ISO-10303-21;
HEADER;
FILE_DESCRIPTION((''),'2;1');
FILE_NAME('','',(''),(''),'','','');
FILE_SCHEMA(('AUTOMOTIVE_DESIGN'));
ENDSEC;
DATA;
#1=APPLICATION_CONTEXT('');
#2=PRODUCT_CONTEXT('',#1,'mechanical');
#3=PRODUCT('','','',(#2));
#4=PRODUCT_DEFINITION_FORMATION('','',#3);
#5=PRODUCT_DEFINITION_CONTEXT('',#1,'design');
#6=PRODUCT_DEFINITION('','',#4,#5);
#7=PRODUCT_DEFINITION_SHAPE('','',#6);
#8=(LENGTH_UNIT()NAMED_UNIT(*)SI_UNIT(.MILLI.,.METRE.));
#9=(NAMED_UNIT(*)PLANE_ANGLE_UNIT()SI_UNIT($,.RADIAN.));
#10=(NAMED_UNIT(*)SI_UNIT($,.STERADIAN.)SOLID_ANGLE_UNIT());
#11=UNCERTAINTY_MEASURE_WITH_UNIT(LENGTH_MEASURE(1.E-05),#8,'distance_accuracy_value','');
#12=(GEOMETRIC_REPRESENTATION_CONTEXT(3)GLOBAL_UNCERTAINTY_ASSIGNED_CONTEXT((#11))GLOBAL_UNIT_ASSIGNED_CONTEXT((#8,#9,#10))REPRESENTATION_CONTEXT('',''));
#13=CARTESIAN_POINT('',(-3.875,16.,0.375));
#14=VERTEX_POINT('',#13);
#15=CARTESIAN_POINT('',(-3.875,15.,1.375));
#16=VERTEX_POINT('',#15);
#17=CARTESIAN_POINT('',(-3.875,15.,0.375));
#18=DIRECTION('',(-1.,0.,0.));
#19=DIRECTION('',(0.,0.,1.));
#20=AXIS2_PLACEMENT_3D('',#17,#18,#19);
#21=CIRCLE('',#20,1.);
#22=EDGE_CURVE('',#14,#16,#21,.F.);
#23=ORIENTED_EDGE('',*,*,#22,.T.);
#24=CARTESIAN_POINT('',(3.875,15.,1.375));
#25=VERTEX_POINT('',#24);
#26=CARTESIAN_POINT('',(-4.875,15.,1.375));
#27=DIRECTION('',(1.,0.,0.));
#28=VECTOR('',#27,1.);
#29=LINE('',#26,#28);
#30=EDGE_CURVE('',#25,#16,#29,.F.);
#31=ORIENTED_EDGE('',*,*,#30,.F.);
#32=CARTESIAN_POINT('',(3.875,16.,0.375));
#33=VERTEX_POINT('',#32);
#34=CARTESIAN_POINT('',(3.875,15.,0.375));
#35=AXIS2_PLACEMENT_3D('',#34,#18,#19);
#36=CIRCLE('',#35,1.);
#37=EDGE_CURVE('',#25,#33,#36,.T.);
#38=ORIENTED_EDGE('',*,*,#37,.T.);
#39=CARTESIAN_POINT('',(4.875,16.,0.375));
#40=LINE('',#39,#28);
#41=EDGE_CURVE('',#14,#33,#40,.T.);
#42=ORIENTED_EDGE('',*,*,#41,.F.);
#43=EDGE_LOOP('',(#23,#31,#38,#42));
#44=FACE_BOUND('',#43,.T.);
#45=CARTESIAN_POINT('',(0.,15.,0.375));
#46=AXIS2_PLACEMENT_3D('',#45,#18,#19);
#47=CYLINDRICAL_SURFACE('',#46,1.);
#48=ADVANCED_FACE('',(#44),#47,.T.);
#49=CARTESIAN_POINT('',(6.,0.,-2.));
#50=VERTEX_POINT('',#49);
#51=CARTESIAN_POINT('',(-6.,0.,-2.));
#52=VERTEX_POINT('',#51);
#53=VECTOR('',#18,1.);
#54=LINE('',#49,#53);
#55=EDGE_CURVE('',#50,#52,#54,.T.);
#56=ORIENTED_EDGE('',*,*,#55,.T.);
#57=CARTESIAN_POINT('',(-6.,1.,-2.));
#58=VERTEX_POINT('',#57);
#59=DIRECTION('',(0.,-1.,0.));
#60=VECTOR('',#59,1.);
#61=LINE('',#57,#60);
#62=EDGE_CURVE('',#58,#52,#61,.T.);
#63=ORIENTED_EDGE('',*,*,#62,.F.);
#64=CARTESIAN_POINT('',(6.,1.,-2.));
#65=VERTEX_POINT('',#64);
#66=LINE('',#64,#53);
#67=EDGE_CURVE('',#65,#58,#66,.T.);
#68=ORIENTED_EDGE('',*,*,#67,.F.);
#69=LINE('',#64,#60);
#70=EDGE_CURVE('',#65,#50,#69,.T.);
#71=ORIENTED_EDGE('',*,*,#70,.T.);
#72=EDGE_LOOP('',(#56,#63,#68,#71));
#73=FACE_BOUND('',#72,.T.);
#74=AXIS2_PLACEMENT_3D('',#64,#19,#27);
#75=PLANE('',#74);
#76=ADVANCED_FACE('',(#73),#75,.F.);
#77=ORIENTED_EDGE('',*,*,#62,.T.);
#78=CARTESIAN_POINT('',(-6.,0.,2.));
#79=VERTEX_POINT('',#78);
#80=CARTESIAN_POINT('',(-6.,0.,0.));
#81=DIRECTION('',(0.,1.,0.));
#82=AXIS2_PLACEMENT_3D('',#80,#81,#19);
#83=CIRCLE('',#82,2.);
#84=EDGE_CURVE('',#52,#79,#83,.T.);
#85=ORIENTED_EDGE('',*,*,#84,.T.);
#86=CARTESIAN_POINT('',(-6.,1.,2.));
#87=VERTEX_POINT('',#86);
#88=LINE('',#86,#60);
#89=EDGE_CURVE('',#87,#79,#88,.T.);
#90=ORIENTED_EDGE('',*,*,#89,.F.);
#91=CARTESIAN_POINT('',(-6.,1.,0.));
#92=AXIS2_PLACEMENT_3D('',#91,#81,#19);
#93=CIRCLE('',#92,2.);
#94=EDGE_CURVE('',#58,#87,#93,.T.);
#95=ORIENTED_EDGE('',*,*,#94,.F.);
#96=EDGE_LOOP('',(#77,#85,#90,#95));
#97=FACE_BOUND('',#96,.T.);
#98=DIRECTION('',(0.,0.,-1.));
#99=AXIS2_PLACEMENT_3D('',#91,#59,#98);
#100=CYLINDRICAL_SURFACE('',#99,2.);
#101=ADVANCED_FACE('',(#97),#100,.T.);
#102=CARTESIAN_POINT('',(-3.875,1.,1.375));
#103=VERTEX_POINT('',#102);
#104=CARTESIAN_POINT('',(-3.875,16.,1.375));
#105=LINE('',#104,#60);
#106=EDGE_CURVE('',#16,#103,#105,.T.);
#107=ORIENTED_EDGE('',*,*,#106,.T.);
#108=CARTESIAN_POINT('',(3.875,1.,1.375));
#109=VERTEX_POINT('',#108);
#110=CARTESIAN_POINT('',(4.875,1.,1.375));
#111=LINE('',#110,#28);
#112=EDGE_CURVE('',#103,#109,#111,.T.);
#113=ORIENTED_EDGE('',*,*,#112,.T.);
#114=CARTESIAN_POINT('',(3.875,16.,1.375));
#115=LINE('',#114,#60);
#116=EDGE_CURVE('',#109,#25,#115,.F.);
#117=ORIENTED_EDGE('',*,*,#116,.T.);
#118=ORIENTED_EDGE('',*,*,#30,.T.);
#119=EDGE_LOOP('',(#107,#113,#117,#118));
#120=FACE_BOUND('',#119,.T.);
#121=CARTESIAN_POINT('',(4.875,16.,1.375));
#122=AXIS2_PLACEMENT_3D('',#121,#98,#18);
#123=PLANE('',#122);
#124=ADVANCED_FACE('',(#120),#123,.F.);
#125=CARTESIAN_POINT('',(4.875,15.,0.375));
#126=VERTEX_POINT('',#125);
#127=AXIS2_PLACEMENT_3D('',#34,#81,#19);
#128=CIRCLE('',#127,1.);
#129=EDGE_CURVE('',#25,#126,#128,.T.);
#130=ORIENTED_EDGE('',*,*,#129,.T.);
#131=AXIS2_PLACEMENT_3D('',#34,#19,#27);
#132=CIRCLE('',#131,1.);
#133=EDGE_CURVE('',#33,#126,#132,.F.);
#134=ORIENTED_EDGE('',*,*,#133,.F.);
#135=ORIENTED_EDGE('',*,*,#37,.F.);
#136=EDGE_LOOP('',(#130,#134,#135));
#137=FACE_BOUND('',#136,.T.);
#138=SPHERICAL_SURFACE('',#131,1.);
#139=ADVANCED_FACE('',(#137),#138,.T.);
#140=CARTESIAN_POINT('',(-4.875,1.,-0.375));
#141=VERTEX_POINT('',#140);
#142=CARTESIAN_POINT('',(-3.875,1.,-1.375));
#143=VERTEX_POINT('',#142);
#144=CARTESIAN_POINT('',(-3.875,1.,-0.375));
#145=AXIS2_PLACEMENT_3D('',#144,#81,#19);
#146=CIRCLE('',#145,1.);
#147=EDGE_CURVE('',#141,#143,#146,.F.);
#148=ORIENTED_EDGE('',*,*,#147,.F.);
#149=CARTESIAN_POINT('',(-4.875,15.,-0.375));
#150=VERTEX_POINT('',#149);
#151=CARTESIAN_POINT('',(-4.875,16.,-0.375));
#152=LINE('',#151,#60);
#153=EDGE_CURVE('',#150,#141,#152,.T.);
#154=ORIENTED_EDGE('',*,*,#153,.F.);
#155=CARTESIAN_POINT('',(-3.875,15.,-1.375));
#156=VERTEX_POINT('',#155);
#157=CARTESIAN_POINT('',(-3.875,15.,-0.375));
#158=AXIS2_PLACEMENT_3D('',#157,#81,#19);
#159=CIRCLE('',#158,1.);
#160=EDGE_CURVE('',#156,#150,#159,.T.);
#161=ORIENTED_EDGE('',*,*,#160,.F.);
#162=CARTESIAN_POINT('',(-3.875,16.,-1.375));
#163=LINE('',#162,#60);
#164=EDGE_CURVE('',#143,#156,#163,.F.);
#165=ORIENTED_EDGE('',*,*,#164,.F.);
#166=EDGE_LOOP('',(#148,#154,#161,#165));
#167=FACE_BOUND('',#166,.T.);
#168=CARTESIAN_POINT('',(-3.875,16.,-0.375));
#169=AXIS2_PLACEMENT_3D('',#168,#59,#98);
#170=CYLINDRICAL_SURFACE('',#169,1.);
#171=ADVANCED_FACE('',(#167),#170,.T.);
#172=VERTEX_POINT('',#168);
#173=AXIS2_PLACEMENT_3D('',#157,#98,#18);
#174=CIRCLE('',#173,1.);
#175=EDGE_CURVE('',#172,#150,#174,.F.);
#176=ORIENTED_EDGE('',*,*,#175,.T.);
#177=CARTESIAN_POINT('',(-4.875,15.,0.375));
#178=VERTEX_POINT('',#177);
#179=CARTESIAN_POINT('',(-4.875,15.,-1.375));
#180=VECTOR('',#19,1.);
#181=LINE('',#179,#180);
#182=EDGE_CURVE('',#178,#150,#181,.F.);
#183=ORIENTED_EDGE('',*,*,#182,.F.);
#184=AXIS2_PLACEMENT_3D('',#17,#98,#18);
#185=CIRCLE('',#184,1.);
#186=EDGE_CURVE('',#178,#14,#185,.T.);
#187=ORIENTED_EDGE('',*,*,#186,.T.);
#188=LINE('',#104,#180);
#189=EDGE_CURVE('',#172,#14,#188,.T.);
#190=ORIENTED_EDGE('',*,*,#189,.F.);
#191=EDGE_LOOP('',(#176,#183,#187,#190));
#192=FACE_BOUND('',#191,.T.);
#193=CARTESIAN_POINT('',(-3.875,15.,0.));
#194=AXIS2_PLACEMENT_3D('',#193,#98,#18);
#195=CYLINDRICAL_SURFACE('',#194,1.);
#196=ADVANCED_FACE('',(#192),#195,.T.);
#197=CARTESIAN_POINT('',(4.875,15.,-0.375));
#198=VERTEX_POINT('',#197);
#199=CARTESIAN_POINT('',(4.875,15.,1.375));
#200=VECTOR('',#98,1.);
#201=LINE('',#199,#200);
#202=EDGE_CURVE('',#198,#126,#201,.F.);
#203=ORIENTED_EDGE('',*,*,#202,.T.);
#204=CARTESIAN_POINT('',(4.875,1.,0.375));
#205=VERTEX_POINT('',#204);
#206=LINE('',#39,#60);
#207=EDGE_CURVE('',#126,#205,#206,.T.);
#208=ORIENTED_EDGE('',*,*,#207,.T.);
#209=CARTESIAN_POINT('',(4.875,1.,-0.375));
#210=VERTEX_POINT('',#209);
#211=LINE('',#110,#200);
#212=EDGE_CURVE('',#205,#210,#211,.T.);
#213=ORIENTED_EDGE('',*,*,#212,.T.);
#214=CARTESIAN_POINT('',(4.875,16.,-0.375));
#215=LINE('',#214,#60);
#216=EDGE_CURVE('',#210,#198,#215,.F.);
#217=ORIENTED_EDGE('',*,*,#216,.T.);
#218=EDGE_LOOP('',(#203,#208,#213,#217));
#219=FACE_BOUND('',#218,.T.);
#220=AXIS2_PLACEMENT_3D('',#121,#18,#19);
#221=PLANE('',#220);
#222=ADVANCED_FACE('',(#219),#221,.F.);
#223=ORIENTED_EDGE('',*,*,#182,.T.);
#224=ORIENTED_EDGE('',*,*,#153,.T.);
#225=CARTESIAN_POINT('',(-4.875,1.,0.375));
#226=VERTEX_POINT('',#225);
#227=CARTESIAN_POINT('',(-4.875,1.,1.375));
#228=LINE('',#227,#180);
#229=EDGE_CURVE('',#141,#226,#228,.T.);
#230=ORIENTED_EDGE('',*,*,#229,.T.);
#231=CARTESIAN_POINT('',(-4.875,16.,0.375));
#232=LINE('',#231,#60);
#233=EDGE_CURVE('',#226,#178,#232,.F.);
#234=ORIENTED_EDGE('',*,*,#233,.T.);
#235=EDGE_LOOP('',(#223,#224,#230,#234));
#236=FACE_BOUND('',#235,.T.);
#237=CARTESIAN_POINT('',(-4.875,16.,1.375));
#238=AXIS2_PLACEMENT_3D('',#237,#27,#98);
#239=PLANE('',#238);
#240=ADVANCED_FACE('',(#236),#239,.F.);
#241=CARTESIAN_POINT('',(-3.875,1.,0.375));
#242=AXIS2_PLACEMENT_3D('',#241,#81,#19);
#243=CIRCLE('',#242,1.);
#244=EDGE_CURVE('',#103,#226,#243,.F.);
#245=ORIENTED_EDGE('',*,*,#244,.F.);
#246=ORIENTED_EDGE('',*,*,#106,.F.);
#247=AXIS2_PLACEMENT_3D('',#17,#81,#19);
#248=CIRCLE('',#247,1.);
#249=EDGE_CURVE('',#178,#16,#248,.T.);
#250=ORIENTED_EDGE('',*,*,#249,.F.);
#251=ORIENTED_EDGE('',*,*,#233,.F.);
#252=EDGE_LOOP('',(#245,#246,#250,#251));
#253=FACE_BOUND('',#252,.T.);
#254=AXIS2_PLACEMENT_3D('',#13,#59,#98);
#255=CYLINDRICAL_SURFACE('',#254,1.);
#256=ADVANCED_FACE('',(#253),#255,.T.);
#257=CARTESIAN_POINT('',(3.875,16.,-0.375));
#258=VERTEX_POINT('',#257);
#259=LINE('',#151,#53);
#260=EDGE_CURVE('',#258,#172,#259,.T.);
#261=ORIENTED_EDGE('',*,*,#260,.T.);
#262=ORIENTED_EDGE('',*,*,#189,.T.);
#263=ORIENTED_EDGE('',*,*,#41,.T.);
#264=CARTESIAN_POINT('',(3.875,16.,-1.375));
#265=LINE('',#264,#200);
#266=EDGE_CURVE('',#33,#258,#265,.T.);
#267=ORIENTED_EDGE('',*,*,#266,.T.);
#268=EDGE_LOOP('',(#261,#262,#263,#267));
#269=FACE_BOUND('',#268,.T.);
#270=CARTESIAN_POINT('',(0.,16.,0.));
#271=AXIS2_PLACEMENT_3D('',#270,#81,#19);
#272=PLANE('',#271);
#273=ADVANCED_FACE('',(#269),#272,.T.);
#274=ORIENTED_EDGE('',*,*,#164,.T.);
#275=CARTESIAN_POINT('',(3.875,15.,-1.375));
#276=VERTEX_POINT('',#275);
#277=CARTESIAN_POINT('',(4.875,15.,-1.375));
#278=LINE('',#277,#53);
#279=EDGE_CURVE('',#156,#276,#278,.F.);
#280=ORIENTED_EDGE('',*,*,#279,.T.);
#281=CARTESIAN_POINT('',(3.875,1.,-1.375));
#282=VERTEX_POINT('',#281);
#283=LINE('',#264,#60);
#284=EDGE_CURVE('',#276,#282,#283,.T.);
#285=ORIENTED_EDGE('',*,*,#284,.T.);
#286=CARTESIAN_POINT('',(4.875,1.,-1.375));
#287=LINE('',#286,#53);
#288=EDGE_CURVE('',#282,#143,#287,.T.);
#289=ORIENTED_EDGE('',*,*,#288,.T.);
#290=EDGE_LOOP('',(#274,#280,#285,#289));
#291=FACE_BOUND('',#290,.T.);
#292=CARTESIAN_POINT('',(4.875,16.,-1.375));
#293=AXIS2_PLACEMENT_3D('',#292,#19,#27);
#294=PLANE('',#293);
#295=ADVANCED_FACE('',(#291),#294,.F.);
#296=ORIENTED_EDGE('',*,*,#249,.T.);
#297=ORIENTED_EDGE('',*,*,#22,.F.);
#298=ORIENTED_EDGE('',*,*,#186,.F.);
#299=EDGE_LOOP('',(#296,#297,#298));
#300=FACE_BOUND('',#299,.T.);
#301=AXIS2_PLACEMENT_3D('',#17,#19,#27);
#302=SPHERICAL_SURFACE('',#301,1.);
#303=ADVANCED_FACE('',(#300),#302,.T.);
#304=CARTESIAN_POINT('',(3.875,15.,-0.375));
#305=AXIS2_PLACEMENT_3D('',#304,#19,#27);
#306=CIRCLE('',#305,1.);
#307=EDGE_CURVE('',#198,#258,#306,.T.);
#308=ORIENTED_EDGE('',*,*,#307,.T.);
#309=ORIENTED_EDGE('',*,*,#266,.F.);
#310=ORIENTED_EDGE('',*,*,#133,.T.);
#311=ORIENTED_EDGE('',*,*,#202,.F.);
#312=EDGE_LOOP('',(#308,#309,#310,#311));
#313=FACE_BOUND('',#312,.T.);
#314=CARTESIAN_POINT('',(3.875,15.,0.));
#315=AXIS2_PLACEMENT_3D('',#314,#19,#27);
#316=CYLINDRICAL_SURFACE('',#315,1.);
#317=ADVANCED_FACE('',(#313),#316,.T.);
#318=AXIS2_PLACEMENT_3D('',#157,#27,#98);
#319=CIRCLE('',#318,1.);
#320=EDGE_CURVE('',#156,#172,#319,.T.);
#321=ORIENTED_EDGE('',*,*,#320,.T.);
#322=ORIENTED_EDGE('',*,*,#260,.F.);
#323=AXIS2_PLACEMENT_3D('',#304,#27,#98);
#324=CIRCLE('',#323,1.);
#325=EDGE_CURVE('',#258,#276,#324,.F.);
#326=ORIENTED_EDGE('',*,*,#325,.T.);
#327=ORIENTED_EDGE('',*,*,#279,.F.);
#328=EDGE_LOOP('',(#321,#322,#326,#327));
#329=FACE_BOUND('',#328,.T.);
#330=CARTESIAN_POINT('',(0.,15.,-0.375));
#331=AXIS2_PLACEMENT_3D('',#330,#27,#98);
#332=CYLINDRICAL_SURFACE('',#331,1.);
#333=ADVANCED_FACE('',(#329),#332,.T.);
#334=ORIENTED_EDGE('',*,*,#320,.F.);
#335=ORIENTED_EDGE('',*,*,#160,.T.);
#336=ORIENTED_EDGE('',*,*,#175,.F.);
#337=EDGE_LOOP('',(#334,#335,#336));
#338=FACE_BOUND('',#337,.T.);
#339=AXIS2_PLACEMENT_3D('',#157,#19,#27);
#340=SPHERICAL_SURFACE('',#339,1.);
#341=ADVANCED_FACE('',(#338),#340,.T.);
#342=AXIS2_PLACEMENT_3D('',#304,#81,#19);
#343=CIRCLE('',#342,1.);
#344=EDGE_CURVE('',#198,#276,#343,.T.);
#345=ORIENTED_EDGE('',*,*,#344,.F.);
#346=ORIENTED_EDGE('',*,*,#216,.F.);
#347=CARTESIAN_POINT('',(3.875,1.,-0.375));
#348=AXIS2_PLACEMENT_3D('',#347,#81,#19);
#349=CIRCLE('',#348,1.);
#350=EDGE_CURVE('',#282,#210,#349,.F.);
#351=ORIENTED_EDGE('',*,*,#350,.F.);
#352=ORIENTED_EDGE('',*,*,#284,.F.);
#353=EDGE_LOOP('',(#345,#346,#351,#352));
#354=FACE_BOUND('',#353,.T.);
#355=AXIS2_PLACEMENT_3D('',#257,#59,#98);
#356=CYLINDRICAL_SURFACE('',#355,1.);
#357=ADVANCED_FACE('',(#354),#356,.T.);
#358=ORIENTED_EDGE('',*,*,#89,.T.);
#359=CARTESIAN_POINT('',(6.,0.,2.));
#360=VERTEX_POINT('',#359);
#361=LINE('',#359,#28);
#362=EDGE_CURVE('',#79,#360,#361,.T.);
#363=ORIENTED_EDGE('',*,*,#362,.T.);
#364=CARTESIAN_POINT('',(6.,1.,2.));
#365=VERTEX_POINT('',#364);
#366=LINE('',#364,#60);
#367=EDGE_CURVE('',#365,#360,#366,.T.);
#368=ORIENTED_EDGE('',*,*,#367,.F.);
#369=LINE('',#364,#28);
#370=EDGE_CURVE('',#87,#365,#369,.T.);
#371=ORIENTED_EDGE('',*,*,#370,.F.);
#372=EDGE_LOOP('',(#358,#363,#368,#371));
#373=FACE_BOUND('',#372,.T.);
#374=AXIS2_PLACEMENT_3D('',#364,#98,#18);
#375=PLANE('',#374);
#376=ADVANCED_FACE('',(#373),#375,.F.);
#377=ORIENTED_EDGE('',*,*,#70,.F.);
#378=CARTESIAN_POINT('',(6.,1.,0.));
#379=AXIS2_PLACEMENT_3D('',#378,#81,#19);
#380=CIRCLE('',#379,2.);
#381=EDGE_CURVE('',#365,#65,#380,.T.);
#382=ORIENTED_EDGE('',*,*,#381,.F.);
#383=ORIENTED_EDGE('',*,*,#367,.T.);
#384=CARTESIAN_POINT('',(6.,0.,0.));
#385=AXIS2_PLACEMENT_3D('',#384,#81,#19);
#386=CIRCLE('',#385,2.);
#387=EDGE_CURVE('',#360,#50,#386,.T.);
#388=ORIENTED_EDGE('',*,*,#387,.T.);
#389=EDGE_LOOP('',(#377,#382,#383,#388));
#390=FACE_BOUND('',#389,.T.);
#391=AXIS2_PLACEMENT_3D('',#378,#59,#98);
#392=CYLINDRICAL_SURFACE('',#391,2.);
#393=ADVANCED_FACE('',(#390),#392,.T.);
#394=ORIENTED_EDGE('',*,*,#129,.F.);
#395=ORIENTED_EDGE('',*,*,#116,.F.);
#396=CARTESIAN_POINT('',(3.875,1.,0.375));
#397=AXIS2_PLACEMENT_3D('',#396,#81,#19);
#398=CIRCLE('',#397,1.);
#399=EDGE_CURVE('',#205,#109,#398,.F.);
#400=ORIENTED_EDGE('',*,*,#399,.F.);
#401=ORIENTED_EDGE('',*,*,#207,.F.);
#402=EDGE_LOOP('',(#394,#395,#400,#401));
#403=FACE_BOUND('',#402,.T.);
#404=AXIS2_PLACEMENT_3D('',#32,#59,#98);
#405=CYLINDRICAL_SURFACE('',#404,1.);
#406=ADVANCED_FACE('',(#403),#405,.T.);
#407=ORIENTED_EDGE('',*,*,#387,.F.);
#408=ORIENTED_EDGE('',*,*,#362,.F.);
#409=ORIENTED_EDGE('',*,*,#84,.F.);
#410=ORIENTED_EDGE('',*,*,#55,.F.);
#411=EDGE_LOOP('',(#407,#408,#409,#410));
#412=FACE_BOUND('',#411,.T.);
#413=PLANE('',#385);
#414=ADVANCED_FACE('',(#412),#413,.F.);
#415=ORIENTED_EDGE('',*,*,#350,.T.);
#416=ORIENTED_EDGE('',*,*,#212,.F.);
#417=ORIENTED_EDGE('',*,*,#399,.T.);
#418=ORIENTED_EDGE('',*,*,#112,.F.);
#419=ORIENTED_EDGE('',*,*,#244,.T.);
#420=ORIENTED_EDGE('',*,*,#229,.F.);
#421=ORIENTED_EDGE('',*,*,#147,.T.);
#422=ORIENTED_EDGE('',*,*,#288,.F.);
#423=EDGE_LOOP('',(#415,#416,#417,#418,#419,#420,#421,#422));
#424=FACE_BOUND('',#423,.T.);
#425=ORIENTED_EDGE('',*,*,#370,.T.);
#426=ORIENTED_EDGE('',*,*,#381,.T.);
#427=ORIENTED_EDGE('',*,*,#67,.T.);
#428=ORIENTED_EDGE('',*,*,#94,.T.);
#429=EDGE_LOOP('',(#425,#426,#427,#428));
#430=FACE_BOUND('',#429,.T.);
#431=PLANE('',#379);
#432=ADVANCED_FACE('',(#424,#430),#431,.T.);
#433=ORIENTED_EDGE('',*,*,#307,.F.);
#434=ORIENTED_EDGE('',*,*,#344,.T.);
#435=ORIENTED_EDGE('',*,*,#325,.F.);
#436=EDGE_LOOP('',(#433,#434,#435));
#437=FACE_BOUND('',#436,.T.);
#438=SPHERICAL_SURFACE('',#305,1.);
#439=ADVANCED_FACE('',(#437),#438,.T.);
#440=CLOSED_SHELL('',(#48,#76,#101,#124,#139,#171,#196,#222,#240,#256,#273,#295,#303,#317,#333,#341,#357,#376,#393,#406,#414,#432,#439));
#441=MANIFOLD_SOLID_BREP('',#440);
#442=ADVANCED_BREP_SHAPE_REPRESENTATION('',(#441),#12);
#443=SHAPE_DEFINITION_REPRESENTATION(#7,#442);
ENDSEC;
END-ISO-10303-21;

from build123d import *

# Parameters (mm, degrees)
BOSS_EXTRUDE1_DEPTH = 1
SKETCH2_W           = 9.75
SKETCH2_H           = 2.75
BOSS_EXTRUDE2_DEPTH = 15
FILLET1_R           = 1
FILLET2_R           = 1


with BuildPart() as part:
    # Sketch1 → Boss-Extrude1 (new body)
    with BuildSketch(Plane(origin=(0, 0, 0), x_dir=(1, 0, 0), z_dir=(0, 1, 0))):
        with BuildLine():
            Line((6, -2), (-6, -2))
            ThreePointArc((-6, -2), (-8, 0), (-6, 2))
            Line((-6, 2), (6, 2))
            ThreePointArc((6, 2), (8, 0), (6, -2))
        make_face()
    extrude(amount=BOSS_EXTRUDE1_DEPTH)

    # Sketch2 → Boss-Extrude2 (add)
    with BuildSketch(Plane(origin=(0, 1, 0), x_dir=(1, 0, 0), z_dir=(0, 1, 0))):
        Rectangle(SKETCH2_W, SKETCH2_H)
    extrude(amount=BOSS_EXTRUDE2_DEPTH)

    # Fillet1
    fillet1_edges = [part.edges().sort_by_distance(p)[0] for p in [
        (-4.875, 16, 0),
        (0, 16, 1.375),
        (4.875, 16, 0),
        (0, 16, -1.375),
    ]]
    fillet(fillet1_edges, radius=FILLET1_R)

    # Fillet2
    # the kernel refuses this fillet: 1 mm, written as the material it takes off along each edge
    with BuildSketch(Plane(origin=(3.875, 15, 0.375), x_dir=(1, 0, 0), z_dir=(0, 0, 1))) as fillet2_piece_1_section:
        Polygon((0, 0), (FILLET2_R * 1.02, 0), (FILLET2_R * 1.02, FILLET2_R * 1.02), (0, FILLET2_R * 1.02), align=None)
    fillet2_piece_1 = extrude(amount=FILLET2_R * 1.02, mode=Mode.PRIVATE)
    fillet2_piece_1 = fillet2_piece_1 - Plane(origin=(3.875, 15, 0.375), x_dir=(-0.7071067811865475, -0.7071067811865475, 0), z_dir=(0, 0, 1)) * Sphere(FILLET2_R, mode=Mode.PRIVATE)
    add(fillet2_piece_1, mode=Mode.SUBTRACT)
    with BuildSketch(Plane(origin=(-3.875, 15, 0.375), x_dir=(-1, 0, 0), z_dir=(0, 0, 1))) as fillet2_piece_2_section:
        Polygon((0, 0), (FILLET2_R * 1.02, 0), (FILLET2_R * 1.02, -FILLET2_R * 1.02), (0, -FILLET2_R * 1.02), align=None)
    fillet2_piece_2 = extrude(amount=FILLET2_R * 1.02, mode=Mode.PRIVATE)
    fillet2_piece_2 = fillet2_piece_2 - Plane(origin=(-3.875, 15, 0.375), x_dir=(0.7071067811865475, -0.7071067811865475, 0), z_dir=(0, 0, 1)) * Sphere(FILLET2_R, mode=Mode.PRIVATE)
    add(fillet2_piece_2, mode=Mode.SUBTRACT)
    with BuildSketch(Plane(origin=(3.875, 15, -0.375), x_dir=(0, 0, -1), z_dir=(1, 0, 0))) as fillet2_piece_3_section:
        Polygon((0, 0), (FILLET2_R * 1.02, 0), (FILLET2_R * 1.02, FILLET2_R * 1.02), (0, FILLET2_R * 1.02), align=None)
    fillet2_piece_3 = extrude(amount=FILLET2_R * 1.02, mode=Mode.PRIVATE)
    fillet2_piece_3 = fillet2_piece_3 - Plane(origin=(3.875, 15, -0.375), x_dir=(0, -0.7071067811865475, 0.7071067811865475), z_dir=(1, 0, 0)) * Sphere(FILLET2_R, mode=Mode.PRIVATE)
    add(fillet2_piece_3, mode=Mode.SUBTRACT)
    with BuildSketch(Plane(origin=(-3.875, 15, -0.375), x_dir=(0, 0, -1), z_dir=(-1, 0, 0))) as fillet2_piece_4_section:
        Polygon((0, 0), (FILLET2_R * 1.02, 0), (FILLET2_R * 1.02, -FILLET2_R * 1.02), (0, -FILLET2_R * 1.02), align=None)
    fillet2_piece_4 = extrude(amount=FILLET2_R * 1.02, mode=Mode.PRIVATE)
    fillet2_piece_4 = fillet2_piece_4 - Plane(origin=(-3.875, 15, -0.375), x_dir=(0, -0.7071067811865475, 0.7071067811865475), z_dir=(-1, 0, 0)) * Sphere(FILLET2_R, mode=Mode.PRIVATE)
    add(fillet2_piece_4, mode=Mode.SUBTRACT)
    with BuildSketch(Plane(origin=(-4.875, 1, -1.375), x_dir=(0, 0, 1), z_dir=(0, 1, 0)), Plane(origin=(-4.875, 1, 1.375), x_dir=(1, 0, 0), z_dir=(0, 1, 0))) as fillet2_piece_5:
        with BuildLine():
            CenterArc((FILLET2_R, FILLET2_R), FILLET2_R, 180, 90)
            Line((0, FILLET2_R), (0, 0))
            Line((0, 0), (FILLET2_R, 0))
        make_face()
    extrude(amount=14, mode=Mode.SUBTRACT)
    with BuildSketch(Plane(origin=(4.875, 1, -1.375), x_dir=(0, 0, 1), z_dir=(0, 1, 0)), Plane(origin=(4.875, 1, 1.375), x_dir=(-1, 0, 0), z_dir=(0, 1, 0))) as fillet2_piece_6:
        with BuildLine():
            CenterArc((FILLET2_R, -FILLET2_R), FILLET2_R, 90, 90)
            Line((0, -FILLET2_R), (0, 0))
            Line((0, 0), (FILLET2_R, 0))
        make_face()
    extrude(amount=14, mode=Mode.SUBTRACT)


solid = part.part
